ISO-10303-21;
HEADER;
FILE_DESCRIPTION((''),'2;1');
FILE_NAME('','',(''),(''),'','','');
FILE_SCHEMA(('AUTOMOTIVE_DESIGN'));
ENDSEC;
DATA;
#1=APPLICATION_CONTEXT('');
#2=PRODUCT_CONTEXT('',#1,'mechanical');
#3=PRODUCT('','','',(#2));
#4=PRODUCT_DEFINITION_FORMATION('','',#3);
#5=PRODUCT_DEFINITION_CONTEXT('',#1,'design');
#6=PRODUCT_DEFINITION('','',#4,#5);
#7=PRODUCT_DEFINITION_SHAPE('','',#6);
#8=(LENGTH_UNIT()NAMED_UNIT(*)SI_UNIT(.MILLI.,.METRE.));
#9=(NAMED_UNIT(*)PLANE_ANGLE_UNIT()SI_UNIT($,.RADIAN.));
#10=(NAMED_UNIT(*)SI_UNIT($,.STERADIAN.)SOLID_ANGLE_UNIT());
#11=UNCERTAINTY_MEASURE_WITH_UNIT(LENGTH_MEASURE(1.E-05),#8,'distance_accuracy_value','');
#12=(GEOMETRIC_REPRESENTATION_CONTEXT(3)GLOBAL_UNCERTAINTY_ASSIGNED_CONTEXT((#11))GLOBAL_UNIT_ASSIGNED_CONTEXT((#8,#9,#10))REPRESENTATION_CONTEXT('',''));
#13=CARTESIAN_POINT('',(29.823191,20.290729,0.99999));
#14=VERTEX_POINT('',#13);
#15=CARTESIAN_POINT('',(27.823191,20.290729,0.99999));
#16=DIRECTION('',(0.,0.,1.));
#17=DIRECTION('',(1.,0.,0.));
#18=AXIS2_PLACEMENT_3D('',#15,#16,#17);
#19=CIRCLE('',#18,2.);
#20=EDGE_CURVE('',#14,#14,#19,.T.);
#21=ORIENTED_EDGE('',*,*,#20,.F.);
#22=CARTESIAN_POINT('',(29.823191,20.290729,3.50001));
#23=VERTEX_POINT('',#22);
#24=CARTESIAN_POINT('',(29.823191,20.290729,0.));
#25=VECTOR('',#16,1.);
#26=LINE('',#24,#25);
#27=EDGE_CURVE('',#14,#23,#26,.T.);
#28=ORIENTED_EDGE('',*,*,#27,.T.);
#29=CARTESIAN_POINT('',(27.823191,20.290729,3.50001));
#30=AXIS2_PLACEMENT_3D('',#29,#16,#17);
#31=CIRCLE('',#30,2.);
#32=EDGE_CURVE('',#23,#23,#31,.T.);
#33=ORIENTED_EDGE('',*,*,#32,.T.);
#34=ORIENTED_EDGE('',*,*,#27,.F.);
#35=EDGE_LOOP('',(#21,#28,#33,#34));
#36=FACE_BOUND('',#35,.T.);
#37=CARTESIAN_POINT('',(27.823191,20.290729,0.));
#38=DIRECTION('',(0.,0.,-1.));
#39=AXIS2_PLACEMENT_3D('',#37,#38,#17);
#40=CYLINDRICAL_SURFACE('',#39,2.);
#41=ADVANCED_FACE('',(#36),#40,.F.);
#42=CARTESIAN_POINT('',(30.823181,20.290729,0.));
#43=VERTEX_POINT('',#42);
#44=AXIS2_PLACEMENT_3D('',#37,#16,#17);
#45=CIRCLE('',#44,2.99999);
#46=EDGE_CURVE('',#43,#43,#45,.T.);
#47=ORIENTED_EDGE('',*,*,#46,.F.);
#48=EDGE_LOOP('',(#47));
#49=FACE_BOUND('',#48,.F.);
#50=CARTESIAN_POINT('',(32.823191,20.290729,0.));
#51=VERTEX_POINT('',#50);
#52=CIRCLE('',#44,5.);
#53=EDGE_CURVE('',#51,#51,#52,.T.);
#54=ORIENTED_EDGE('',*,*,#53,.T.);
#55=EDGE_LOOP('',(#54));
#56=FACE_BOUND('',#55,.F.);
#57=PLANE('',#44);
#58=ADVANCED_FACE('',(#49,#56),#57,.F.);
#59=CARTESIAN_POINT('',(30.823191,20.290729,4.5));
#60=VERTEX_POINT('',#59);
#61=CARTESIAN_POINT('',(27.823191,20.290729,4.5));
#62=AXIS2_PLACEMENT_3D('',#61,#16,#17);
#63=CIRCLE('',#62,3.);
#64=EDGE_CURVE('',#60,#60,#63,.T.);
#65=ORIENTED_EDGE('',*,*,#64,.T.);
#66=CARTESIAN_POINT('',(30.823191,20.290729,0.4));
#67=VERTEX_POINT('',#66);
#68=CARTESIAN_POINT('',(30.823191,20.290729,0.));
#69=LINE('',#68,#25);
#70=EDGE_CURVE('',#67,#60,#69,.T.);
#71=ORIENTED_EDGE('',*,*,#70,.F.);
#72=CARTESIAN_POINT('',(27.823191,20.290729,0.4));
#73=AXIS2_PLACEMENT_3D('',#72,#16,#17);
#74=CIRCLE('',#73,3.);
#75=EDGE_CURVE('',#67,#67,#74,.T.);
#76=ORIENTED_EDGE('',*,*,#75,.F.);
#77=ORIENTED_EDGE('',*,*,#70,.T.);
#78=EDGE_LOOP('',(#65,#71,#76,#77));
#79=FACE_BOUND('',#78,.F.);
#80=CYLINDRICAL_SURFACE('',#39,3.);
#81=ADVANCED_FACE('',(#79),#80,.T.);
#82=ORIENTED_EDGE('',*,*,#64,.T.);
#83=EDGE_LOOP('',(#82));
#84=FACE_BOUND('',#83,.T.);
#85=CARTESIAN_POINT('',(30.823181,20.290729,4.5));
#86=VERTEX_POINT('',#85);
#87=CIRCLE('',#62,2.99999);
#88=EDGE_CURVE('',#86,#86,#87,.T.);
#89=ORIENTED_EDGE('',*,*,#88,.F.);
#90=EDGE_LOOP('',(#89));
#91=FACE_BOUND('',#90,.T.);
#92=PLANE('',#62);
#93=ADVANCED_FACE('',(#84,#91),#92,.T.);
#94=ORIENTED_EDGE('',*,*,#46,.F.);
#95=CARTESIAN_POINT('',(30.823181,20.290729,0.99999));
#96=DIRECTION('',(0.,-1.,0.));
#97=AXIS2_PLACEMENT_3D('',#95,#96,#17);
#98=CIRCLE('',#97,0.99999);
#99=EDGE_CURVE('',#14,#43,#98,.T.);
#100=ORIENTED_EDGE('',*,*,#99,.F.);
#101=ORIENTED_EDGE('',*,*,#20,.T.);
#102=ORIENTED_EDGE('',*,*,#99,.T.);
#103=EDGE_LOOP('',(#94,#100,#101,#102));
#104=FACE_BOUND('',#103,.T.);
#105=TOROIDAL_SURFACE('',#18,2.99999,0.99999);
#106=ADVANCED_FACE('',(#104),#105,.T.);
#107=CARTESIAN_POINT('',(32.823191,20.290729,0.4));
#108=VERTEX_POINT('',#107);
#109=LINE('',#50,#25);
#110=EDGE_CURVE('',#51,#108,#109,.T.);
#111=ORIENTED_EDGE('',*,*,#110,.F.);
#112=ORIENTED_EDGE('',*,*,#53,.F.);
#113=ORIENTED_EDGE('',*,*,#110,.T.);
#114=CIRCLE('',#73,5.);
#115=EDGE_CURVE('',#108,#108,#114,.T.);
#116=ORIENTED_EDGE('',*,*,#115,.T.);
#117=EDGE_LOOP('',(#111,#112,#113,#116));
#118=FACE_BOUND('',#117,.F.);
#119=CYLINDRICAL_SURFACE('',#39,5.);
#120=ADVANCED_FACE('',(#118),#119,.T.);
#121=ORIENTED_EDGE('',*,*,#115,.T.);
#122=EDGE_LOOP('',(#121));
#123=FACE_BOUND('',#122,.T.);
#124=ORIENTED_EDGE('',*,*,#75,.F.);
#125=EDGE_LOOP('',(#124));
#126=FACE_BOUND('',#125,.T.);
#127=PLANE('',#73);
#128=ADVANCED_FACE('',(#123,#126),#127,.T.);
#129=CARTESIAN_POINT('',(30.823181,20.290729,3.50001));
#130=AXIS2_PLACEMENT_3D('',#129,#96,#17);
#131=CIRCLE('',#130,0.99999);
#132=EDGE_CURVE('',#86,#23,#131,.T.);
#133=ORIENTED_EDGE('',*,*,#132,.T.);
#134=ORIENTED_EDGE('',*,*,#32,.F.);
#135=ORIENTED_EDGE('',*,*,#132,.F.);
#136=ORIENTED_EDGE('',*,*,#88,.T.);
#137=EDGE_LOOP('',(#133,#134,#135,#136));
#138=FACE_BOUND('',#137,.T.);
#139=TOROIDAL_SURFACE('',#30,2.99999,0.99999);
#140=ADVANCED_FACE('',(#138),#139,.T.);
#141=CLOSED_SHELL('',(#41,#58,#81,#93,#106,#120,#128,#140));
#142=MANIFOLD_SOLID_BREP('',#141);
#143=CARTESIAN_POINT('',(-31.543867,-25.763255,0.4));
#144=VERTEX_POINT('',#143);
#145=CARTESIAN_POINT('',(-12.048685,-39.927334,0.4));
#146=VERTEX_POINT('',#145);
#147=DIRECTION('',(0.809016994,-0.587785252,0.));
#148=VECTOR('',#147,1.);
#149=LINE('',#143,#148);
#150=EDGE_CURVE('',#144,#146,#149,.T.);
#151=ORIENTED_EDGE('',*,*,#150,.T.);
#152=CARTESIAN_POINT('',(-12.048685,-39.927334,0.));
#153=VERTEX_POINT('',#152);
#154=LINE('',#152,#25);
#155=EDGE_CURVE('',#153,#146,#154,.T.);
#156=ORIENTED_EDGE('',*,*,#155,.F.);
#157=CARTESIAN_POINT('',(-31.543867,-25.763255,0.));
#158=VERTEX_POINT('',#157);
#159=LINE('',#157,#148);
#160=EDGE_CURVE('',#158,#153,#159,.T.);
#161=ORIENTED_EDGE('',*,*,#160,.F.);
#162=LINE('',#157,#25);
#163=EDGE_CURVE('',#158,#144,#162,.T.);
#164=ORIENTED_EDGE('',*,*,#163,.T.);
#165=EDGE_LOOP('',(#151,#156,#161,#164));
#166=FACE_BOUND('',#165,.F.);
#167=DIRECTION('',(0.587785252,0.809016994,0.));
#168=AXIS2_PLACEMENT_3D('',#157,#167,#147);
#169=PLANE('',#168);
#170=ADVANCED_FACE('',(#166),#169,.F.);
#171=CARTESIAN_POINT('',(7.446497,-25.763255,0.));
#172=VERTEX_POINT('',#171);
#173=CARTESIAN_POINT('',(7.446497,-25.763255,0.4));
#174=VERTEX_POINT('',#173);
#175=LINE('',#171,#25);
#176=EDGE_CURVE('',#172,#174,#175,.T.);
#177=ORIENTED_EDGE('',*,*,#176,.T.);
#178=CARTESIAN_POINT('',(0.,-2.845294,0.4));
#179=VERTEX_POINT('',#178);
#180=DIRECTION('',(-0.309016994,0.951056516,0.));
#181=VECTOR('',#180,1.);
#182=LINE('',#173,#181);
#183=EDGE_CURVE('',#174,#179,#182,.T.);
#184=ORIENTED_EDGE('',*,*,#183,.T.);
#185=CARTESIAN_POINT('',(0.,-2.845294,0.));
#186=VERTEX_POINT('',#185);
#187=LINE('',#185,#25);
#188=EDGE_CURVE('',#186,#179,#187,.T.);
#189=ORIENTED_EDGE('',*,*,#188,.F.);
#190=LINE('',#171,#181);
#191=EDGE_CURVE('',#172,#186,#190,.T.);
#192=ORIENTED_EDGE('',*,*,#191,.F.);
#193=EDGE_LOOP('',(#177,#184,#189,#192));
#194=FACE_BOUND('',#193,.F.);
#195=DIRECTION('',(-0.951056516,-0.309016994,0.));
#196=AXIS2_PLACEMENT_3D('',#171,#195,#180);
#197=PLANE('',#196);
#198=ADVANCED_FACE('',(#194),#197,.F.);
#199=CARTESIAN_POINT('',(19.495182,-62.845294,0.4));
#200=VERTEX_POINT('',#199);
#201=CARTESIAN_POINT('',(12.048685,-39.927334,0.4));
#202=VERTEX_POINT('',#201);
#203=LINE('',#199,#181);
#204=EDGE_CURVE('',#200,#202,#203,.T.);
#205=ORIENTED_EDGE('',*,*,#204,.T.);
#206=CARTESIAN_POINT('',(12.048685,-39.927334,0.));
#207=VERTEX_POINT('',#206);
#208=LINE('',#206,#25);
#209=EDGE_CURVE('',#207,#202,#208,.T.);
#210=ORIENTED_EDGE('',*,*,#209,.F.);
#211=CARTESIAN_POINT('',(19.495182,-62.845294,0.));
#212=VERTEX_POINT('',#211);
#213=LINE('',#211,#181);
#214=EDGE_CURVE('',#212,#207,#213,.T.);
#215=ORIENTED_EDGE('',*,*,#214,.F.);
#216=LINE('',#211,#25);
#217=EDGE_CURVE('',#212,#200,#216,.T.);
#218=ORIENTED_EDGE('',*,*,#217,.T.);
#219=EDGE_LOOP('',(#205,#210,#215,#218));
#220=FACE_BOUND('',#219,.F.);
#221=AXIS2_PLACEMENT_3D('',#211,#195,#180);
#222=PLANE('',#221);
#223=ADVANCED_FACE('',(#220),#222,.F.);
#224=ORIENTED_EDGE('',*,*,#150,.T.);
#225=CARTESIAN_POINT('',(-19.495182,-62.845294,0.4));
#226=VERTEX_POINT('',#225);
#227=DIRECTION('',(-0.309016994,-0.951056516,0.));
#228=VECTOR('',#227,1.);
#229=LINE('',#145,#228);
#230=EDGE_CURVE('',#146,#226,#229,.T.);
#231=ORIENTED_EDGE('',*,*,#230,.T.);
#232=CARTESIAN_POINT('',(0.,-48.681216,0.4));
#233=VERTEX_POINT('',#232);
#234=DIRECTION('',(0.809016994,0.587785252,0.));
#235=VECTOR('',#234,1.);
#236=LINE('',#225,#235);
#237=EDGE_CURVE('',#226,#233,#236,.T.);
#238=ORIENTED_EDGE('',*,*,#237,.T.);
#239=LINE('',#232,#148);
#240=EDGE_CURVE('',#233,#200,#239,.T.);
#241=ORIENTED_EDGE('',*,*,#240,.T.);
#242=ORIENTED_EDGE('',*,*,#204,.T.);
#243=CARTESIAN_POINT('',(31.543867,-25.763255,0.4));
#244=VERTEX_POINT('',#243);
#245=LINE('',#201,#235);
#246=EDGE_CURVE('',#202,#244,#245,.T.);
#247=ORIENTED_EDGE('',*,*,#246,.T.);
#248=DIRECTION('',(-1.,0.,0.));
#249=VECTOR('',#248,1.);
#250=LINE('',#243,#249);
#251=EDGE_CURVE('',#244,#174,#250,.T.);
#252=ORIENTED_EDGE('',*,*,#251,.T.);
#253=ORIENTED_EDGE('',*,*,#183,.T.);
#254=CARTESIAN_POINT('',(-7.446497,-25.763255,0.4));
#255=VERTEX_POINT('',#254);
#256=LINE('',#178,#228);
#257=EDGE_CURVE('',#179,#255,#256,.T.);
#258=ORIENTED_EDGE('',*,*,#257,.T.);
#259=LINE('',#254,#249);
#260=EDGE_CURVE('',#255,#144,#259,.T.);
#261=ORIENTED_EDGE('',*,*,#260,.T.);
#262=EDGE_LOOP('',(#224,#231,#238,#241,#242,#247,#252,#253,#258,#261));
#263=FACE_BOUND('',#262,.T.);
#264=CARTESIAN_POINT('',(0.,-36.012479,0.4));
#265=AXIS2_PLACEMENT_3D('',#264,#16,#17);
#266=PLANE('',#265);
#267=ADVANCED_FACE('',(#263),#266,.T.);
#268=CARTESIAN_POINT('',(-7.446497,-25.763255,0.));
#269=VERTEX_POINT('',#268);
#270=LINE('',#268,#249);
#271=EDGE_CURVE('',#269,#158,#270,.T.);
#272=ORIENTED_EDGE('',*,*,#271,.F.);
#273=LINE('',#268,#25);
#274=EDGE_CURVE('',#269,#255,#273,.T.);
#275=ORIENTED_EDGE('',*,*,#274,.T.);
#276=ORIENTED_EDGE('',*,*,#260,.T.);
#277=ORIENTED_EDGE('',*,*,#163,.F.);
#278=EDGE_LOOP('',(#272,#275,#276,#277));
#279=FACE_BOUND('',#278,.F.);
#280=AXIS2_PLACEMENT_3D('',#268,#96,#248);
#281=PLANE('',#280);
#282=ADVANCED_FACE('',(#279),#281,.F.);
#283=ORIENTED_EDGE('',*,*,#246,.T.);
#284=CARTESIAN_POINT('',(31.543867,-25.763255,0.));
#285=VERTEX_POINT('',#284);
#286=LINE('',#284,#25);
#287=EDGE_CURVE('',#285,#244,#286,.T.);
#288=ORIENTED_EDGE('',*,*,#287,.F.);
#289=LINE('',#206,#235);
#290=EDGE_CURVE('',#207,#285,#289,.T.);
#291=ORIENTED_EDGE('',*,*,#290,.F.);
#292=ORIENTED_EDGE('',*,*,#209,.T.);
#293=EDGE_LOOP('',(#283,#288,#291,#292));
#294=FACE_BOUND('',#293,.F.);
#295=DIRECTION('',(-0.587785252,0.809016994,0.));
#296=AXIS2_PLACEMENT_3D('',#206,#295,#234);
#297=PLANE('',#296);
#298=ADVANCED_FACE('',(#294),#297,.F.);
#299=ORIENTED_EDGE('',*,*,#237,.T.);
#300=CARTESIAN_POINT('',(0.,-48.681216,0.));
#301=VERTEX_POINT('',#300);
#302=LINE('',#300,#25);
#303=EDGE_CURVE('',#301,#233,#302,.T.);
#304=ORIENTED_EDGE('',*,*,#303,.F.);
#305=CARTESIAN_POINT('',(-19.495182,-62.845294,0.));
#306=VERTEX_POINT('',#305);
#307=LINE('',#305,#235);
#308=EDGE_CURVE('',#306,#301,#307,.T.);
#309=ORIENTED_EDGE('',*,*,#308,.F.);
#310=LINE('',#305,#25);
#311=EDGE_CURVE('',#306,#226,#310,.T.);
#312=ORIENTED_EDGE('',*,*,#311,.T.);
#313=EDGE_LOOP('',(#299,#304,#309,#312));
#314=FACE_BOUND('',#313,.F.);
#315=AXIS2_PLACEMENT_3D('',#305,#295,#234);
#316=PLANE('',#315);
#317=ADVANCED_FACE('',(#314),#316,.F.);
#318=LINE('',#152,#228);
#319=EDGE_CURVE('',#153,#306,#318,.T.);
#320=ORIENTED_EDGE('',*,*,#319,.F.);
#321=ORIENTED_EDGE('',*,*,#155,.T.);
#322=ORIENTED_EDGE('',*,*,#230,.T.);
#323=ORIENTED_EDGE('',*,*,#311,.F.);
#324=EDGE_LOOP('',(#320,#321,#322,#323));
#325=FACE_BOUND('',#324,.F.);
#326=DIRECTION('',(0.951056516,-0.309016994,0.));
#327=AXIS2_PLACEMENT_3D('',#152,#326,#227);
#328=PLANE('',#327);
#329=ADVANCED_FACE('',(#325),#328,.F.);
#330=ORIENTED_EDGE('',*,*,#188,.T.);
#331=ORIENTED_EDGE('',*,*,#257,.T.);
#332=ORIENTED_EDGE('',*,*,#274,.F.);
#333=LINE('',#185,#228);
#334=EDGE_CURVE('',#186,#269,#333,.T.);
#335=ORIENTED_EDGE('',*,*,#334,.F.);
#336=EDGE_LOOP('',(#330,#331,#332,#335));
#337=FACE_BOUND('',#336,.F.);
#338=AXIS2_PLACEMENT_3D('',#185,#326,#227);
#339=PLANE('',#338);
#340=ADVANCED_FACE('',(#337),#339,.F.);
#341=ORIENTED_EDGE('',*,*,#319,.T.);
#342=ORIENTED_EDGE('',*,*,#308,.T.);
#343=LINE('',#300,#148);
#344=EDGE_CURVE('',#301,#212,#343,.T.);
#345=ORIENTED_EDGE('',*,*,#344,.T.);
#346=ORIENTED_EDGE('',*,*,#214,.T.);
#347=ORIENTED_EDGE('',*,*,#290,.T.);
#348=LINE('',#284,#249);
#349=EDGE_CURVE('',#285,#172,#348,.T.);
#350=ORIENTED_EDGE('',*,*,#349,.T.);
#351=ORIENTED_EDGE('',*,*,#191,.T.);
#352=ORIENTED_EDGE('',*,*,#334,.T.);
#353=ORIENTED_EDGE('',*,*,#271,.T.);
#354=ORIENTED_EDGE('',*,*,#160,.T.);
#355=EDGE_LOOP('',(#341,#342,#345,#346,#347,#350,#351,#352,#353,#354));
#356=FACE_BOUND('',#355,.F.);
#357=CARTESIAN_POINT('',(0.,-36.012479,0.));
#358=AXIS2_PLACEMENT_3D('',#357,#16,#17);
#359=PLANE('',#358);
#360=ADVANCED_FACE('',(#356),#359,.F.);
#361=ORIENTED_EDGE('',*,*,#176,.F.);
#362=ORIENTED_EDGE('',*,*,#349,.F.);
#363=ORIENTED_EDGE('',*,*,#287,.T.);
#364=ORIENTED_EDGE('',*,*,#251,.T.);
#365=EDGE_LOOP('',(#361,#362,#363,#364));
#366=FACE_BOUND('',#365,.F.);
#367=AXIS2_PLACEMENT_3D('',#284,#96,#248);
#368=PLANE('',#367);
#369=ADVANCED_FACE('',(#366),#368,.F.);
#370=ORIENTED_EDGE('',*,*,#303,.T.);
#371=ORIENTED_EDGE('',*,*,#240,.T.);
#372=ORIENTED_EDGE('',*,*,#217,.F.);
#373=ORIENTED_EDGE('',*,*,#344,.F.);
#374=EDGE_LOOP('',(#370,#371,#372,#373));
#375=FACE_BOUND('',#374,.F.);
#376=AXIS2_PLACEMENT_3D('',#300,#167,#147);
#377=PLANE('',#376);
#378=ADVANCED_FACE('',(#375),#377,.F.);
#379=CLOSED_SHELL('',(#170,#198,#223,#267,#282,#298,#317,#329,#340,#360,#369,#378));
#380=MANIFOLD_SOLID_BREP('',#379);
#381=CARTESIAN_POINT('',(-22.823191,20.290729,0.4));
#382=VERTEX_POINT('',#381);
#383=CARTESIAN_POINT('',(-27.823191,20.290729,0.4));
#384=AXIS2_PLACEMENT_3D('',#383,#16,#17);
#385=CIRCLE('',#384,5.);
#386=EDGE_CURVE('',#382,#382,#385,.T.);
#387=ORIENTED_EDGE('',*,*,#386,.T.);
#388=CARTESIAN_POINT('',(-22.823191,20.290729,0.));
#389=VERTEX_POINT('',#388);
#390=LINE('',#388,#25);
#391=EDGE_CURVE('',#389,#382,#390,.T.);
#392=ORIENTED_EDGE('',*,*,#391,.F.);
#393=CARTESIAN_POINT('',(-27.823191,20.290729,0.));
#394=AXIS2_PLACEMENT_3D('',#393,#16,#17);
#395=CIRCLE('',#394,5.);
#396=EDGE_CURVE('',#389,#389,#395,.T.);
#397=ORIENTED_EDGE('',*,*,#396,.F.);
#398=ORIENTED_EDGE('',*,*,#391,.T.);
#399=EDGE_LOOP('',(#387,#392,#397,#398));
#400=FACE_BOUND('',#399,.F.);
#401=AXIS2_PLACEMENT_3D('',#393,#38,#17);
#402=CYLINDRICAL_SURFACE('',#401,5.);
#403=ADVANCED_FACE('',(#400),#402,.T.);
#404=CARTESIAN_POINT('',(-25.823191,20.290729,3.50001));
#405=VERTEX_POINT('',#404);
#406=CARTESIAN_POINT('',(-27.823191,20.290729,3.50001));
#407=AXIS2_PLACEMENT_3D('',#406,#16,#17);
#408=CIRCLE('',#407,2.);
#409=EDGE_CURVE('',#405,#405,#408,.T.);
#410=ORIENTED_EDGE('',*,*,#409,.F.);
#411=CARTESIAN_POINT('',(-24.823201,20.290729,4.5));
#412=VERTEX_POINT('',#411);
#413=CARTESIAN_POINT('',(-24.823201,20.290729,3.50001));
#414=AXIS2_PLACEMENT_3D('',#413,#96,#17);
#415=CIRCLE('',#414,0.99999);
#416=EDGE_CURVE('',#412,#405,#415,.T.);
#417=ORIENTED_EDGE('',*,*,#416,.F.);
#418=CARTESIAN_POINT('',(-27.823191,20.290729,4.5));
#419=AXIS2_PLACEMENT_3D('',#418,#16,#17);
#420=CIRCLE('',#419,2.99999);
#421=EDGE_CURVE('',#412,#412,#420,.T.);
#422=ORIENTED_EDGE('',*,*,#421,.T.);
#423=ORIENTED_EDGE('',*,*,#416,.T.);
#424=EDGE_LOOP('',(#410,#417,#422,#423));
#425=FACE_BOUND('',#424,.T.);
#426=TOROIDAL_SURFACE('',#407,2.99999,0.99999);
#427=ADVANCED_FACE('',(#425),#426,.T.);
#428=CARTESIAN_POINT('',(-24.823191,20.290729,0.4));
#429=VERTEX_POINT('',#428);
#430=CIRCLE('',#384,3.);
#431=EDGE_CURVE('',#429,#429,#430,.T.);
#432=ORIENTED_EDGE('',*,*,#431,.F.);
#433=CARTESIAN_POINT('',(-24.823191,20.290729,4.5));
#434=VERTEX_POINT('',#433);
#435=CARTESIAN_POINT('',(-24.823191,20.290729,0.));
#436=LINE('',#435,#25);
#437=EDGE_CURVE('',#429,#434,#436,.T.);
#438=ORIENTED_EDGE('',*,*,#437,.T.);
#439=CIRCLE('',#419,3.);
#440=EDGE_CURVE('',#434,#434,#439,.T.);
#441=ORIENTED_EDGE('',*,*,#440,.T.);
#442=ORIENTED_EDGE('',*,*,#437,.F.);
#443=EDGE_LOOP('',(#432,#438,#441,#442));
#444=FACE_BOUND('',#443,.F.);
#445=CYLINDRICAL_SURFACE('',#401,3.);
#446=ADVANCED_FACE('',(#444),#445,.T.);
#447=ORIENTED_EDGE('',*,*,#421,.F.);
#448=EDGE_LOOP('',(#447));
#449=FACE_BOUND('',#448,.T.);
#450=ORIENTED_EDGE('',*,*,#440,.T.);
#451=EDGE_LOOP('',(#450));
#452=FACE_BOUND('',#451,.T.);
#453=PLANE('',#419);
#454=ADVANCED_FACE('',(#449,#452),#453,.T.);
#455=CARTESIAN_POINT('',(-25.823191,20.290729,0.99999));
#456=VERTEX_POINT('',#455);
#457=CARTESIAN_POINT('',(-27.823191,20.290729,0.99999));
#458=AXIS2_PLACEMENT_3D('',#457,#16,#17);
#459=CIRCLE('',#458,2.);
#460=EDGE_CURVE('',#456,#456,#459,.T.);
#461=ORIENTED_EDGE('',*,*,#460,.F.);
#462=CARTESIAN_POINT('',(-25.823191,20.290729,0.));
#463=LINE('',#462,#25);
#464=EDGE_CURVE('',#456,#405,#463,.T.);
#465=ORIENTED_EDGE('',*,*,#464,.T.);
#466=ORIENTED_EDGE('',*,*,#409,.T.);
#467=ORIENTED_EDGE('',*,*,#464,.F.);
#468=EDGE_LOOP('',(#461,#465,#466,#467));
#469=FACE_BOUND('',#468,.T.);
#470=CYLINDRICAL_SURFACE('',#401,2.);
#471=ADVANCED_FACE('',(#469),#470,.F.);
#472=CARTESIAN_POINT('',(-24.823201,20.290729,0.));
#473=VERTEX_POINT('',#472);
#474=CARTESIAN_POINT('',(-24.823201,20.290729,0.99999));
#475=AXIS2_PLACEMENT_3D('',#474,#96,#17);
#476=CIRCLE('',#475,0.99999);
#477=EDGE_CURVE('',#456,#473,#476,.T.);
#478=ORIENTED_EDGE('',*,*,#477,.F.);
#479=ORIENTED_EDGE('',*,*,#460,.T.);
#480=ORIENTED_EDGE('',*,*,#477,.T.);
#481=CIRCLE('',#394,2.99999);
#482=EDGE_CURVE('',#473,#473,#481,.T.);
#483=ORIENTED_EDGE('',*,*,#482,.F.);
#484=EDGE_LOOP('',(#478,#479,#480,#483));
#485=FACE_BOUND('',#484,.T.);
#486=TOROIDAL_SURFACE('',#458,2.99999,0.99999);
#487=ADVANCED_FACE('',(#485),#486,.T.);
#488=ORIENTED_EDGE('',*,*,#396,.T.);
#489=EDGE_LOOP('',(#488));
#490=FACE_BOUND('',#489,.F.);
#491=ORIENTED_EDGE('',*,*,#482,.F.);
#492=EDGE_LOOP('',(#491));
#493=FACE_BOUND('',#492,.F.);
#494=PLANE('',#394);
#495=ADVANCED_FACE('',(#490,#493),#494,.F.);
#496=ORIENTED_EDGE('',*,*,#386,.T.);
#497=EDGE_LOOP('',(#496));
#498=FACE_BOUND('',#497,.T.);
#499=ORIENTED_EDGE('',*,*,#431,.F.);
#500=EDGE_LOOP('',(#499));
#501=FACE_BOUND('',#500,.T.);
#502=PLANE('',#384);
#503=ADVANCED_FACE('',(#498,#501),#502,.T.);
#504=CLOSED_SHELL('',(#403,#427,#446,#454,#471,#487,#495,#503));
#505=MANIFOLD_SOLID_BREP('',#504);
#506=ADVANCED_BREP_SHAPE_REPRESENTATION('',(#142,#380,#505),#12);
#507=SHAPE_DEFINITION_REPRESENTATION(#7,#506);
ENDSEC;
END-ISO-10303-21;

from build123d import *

# Parameters (mm, degrees)
F0_R     = 5
F0_R_2   = 3
F1_DEPTH = 0.4
F0_R_3   = 2
F2_DEPTH = 4.5
F3_R     = 0.99999
F3_2_R   = 0.99999
F5_DEPTH = 0.4


# Not quite as in the source:
# - a fillet or chamfer is up to 0.001 mm smaller than in the source, because OpenCascade refuses the exact size


with BuildPart() as f1:
    # F0 (on Top) → F1 (new body)
    with BuildSketch(Plane.XY):
        with Locations((-27.8231911361, 20.2907286584)):
            Circle(F0_R)
        with Locations((-27.8231911361, 20.2907286584)):
            Circle(F0_R_2, mode=Mode.SUBTRACT)
    extrude(amount=F1_DEPTH)

    # F0 (on Top) → F2 (join)
    with BuildSketch(Plane.XY):
        with Locations((-27.8231911361, 20.2907286584)):
            Circle(F0_R_2)
        with Locations((-27.8231911361, 20.2907286584)):
            Circle(F0_R_3, mode=Mode.SUBTRACT)
    extrude(amount=F2_DEPTH)

    # F3 (radius 1 in the source; OpenCascade refuses exactly that, so slightly less here)
    f3_edges = [f1.edges().sort_by_distance(p)[0] for p in [
        (-29.823191, 20.290729, 4.5),
        (-29.823191, 20.290729, 0),
    ]]
    fillet(f3_edges, radius=F3_R)


with BuildPart() as f1b:
    # F0 (on Top) → F1, piece 2 (new body)
    with BuildSketch(Plane.XY):
        with Locations((27.8231911361, 20.2907286584)):
            Circle(F0_R)
        with Locations((27.8231911361, 20.2907286584)):
            Circle(F0_R_2, mode=Mode.SUBTRACT)
    extrude(amount=F1_DEPTH)

    # F0 (on Top) → F2, piece 2 (join)
    with BuildSketch(Plane.XY):
        with Locations((27.8231911361, 20.2907286584)):
            Circle(F0_R_2)
        with Locations((27.8231911361, 20.2907286584)):
            Circle(F0_R_3, mode=Mode.SUBTRACT)
    extrude(amount=F2_DEPTH)

    # F3#2 (radius 1 in the source; OpenCascade refuses exactly that, so slightly less here)
    f3_2_edges = [f1b.edges().sort_by_distance(p)[0] for p in [
        (25.823191, 20.290729, 4.5),
        (25.823191, 20.290729, 0),
    ]]
    fillet(f3_2_edges, radius=F3_2_R)


with BuildPart() as f5:
    # F4 (on Top) → F5 (new body)
    with BuildSketch(Plane.XY):
        Polygon((-31.5438667271, -25.7632551613), (-12.0486849532, -39.9273338113), (-19.495181774, -62.8452944863), (0, -48.6812158363), (19.495181774, -62.8452944863), (12.0486849532, -39.9273338113), (31.5438667271, -25.7632551613), (7.4464968208, -25.7632551613), (0, -2.8452944863), (-7.4464968208, -25.7632551613), align=None)
    extrude(amount=F5_DEPTH)


solid = Compound([f1.part, f1b.part, f5.part])
